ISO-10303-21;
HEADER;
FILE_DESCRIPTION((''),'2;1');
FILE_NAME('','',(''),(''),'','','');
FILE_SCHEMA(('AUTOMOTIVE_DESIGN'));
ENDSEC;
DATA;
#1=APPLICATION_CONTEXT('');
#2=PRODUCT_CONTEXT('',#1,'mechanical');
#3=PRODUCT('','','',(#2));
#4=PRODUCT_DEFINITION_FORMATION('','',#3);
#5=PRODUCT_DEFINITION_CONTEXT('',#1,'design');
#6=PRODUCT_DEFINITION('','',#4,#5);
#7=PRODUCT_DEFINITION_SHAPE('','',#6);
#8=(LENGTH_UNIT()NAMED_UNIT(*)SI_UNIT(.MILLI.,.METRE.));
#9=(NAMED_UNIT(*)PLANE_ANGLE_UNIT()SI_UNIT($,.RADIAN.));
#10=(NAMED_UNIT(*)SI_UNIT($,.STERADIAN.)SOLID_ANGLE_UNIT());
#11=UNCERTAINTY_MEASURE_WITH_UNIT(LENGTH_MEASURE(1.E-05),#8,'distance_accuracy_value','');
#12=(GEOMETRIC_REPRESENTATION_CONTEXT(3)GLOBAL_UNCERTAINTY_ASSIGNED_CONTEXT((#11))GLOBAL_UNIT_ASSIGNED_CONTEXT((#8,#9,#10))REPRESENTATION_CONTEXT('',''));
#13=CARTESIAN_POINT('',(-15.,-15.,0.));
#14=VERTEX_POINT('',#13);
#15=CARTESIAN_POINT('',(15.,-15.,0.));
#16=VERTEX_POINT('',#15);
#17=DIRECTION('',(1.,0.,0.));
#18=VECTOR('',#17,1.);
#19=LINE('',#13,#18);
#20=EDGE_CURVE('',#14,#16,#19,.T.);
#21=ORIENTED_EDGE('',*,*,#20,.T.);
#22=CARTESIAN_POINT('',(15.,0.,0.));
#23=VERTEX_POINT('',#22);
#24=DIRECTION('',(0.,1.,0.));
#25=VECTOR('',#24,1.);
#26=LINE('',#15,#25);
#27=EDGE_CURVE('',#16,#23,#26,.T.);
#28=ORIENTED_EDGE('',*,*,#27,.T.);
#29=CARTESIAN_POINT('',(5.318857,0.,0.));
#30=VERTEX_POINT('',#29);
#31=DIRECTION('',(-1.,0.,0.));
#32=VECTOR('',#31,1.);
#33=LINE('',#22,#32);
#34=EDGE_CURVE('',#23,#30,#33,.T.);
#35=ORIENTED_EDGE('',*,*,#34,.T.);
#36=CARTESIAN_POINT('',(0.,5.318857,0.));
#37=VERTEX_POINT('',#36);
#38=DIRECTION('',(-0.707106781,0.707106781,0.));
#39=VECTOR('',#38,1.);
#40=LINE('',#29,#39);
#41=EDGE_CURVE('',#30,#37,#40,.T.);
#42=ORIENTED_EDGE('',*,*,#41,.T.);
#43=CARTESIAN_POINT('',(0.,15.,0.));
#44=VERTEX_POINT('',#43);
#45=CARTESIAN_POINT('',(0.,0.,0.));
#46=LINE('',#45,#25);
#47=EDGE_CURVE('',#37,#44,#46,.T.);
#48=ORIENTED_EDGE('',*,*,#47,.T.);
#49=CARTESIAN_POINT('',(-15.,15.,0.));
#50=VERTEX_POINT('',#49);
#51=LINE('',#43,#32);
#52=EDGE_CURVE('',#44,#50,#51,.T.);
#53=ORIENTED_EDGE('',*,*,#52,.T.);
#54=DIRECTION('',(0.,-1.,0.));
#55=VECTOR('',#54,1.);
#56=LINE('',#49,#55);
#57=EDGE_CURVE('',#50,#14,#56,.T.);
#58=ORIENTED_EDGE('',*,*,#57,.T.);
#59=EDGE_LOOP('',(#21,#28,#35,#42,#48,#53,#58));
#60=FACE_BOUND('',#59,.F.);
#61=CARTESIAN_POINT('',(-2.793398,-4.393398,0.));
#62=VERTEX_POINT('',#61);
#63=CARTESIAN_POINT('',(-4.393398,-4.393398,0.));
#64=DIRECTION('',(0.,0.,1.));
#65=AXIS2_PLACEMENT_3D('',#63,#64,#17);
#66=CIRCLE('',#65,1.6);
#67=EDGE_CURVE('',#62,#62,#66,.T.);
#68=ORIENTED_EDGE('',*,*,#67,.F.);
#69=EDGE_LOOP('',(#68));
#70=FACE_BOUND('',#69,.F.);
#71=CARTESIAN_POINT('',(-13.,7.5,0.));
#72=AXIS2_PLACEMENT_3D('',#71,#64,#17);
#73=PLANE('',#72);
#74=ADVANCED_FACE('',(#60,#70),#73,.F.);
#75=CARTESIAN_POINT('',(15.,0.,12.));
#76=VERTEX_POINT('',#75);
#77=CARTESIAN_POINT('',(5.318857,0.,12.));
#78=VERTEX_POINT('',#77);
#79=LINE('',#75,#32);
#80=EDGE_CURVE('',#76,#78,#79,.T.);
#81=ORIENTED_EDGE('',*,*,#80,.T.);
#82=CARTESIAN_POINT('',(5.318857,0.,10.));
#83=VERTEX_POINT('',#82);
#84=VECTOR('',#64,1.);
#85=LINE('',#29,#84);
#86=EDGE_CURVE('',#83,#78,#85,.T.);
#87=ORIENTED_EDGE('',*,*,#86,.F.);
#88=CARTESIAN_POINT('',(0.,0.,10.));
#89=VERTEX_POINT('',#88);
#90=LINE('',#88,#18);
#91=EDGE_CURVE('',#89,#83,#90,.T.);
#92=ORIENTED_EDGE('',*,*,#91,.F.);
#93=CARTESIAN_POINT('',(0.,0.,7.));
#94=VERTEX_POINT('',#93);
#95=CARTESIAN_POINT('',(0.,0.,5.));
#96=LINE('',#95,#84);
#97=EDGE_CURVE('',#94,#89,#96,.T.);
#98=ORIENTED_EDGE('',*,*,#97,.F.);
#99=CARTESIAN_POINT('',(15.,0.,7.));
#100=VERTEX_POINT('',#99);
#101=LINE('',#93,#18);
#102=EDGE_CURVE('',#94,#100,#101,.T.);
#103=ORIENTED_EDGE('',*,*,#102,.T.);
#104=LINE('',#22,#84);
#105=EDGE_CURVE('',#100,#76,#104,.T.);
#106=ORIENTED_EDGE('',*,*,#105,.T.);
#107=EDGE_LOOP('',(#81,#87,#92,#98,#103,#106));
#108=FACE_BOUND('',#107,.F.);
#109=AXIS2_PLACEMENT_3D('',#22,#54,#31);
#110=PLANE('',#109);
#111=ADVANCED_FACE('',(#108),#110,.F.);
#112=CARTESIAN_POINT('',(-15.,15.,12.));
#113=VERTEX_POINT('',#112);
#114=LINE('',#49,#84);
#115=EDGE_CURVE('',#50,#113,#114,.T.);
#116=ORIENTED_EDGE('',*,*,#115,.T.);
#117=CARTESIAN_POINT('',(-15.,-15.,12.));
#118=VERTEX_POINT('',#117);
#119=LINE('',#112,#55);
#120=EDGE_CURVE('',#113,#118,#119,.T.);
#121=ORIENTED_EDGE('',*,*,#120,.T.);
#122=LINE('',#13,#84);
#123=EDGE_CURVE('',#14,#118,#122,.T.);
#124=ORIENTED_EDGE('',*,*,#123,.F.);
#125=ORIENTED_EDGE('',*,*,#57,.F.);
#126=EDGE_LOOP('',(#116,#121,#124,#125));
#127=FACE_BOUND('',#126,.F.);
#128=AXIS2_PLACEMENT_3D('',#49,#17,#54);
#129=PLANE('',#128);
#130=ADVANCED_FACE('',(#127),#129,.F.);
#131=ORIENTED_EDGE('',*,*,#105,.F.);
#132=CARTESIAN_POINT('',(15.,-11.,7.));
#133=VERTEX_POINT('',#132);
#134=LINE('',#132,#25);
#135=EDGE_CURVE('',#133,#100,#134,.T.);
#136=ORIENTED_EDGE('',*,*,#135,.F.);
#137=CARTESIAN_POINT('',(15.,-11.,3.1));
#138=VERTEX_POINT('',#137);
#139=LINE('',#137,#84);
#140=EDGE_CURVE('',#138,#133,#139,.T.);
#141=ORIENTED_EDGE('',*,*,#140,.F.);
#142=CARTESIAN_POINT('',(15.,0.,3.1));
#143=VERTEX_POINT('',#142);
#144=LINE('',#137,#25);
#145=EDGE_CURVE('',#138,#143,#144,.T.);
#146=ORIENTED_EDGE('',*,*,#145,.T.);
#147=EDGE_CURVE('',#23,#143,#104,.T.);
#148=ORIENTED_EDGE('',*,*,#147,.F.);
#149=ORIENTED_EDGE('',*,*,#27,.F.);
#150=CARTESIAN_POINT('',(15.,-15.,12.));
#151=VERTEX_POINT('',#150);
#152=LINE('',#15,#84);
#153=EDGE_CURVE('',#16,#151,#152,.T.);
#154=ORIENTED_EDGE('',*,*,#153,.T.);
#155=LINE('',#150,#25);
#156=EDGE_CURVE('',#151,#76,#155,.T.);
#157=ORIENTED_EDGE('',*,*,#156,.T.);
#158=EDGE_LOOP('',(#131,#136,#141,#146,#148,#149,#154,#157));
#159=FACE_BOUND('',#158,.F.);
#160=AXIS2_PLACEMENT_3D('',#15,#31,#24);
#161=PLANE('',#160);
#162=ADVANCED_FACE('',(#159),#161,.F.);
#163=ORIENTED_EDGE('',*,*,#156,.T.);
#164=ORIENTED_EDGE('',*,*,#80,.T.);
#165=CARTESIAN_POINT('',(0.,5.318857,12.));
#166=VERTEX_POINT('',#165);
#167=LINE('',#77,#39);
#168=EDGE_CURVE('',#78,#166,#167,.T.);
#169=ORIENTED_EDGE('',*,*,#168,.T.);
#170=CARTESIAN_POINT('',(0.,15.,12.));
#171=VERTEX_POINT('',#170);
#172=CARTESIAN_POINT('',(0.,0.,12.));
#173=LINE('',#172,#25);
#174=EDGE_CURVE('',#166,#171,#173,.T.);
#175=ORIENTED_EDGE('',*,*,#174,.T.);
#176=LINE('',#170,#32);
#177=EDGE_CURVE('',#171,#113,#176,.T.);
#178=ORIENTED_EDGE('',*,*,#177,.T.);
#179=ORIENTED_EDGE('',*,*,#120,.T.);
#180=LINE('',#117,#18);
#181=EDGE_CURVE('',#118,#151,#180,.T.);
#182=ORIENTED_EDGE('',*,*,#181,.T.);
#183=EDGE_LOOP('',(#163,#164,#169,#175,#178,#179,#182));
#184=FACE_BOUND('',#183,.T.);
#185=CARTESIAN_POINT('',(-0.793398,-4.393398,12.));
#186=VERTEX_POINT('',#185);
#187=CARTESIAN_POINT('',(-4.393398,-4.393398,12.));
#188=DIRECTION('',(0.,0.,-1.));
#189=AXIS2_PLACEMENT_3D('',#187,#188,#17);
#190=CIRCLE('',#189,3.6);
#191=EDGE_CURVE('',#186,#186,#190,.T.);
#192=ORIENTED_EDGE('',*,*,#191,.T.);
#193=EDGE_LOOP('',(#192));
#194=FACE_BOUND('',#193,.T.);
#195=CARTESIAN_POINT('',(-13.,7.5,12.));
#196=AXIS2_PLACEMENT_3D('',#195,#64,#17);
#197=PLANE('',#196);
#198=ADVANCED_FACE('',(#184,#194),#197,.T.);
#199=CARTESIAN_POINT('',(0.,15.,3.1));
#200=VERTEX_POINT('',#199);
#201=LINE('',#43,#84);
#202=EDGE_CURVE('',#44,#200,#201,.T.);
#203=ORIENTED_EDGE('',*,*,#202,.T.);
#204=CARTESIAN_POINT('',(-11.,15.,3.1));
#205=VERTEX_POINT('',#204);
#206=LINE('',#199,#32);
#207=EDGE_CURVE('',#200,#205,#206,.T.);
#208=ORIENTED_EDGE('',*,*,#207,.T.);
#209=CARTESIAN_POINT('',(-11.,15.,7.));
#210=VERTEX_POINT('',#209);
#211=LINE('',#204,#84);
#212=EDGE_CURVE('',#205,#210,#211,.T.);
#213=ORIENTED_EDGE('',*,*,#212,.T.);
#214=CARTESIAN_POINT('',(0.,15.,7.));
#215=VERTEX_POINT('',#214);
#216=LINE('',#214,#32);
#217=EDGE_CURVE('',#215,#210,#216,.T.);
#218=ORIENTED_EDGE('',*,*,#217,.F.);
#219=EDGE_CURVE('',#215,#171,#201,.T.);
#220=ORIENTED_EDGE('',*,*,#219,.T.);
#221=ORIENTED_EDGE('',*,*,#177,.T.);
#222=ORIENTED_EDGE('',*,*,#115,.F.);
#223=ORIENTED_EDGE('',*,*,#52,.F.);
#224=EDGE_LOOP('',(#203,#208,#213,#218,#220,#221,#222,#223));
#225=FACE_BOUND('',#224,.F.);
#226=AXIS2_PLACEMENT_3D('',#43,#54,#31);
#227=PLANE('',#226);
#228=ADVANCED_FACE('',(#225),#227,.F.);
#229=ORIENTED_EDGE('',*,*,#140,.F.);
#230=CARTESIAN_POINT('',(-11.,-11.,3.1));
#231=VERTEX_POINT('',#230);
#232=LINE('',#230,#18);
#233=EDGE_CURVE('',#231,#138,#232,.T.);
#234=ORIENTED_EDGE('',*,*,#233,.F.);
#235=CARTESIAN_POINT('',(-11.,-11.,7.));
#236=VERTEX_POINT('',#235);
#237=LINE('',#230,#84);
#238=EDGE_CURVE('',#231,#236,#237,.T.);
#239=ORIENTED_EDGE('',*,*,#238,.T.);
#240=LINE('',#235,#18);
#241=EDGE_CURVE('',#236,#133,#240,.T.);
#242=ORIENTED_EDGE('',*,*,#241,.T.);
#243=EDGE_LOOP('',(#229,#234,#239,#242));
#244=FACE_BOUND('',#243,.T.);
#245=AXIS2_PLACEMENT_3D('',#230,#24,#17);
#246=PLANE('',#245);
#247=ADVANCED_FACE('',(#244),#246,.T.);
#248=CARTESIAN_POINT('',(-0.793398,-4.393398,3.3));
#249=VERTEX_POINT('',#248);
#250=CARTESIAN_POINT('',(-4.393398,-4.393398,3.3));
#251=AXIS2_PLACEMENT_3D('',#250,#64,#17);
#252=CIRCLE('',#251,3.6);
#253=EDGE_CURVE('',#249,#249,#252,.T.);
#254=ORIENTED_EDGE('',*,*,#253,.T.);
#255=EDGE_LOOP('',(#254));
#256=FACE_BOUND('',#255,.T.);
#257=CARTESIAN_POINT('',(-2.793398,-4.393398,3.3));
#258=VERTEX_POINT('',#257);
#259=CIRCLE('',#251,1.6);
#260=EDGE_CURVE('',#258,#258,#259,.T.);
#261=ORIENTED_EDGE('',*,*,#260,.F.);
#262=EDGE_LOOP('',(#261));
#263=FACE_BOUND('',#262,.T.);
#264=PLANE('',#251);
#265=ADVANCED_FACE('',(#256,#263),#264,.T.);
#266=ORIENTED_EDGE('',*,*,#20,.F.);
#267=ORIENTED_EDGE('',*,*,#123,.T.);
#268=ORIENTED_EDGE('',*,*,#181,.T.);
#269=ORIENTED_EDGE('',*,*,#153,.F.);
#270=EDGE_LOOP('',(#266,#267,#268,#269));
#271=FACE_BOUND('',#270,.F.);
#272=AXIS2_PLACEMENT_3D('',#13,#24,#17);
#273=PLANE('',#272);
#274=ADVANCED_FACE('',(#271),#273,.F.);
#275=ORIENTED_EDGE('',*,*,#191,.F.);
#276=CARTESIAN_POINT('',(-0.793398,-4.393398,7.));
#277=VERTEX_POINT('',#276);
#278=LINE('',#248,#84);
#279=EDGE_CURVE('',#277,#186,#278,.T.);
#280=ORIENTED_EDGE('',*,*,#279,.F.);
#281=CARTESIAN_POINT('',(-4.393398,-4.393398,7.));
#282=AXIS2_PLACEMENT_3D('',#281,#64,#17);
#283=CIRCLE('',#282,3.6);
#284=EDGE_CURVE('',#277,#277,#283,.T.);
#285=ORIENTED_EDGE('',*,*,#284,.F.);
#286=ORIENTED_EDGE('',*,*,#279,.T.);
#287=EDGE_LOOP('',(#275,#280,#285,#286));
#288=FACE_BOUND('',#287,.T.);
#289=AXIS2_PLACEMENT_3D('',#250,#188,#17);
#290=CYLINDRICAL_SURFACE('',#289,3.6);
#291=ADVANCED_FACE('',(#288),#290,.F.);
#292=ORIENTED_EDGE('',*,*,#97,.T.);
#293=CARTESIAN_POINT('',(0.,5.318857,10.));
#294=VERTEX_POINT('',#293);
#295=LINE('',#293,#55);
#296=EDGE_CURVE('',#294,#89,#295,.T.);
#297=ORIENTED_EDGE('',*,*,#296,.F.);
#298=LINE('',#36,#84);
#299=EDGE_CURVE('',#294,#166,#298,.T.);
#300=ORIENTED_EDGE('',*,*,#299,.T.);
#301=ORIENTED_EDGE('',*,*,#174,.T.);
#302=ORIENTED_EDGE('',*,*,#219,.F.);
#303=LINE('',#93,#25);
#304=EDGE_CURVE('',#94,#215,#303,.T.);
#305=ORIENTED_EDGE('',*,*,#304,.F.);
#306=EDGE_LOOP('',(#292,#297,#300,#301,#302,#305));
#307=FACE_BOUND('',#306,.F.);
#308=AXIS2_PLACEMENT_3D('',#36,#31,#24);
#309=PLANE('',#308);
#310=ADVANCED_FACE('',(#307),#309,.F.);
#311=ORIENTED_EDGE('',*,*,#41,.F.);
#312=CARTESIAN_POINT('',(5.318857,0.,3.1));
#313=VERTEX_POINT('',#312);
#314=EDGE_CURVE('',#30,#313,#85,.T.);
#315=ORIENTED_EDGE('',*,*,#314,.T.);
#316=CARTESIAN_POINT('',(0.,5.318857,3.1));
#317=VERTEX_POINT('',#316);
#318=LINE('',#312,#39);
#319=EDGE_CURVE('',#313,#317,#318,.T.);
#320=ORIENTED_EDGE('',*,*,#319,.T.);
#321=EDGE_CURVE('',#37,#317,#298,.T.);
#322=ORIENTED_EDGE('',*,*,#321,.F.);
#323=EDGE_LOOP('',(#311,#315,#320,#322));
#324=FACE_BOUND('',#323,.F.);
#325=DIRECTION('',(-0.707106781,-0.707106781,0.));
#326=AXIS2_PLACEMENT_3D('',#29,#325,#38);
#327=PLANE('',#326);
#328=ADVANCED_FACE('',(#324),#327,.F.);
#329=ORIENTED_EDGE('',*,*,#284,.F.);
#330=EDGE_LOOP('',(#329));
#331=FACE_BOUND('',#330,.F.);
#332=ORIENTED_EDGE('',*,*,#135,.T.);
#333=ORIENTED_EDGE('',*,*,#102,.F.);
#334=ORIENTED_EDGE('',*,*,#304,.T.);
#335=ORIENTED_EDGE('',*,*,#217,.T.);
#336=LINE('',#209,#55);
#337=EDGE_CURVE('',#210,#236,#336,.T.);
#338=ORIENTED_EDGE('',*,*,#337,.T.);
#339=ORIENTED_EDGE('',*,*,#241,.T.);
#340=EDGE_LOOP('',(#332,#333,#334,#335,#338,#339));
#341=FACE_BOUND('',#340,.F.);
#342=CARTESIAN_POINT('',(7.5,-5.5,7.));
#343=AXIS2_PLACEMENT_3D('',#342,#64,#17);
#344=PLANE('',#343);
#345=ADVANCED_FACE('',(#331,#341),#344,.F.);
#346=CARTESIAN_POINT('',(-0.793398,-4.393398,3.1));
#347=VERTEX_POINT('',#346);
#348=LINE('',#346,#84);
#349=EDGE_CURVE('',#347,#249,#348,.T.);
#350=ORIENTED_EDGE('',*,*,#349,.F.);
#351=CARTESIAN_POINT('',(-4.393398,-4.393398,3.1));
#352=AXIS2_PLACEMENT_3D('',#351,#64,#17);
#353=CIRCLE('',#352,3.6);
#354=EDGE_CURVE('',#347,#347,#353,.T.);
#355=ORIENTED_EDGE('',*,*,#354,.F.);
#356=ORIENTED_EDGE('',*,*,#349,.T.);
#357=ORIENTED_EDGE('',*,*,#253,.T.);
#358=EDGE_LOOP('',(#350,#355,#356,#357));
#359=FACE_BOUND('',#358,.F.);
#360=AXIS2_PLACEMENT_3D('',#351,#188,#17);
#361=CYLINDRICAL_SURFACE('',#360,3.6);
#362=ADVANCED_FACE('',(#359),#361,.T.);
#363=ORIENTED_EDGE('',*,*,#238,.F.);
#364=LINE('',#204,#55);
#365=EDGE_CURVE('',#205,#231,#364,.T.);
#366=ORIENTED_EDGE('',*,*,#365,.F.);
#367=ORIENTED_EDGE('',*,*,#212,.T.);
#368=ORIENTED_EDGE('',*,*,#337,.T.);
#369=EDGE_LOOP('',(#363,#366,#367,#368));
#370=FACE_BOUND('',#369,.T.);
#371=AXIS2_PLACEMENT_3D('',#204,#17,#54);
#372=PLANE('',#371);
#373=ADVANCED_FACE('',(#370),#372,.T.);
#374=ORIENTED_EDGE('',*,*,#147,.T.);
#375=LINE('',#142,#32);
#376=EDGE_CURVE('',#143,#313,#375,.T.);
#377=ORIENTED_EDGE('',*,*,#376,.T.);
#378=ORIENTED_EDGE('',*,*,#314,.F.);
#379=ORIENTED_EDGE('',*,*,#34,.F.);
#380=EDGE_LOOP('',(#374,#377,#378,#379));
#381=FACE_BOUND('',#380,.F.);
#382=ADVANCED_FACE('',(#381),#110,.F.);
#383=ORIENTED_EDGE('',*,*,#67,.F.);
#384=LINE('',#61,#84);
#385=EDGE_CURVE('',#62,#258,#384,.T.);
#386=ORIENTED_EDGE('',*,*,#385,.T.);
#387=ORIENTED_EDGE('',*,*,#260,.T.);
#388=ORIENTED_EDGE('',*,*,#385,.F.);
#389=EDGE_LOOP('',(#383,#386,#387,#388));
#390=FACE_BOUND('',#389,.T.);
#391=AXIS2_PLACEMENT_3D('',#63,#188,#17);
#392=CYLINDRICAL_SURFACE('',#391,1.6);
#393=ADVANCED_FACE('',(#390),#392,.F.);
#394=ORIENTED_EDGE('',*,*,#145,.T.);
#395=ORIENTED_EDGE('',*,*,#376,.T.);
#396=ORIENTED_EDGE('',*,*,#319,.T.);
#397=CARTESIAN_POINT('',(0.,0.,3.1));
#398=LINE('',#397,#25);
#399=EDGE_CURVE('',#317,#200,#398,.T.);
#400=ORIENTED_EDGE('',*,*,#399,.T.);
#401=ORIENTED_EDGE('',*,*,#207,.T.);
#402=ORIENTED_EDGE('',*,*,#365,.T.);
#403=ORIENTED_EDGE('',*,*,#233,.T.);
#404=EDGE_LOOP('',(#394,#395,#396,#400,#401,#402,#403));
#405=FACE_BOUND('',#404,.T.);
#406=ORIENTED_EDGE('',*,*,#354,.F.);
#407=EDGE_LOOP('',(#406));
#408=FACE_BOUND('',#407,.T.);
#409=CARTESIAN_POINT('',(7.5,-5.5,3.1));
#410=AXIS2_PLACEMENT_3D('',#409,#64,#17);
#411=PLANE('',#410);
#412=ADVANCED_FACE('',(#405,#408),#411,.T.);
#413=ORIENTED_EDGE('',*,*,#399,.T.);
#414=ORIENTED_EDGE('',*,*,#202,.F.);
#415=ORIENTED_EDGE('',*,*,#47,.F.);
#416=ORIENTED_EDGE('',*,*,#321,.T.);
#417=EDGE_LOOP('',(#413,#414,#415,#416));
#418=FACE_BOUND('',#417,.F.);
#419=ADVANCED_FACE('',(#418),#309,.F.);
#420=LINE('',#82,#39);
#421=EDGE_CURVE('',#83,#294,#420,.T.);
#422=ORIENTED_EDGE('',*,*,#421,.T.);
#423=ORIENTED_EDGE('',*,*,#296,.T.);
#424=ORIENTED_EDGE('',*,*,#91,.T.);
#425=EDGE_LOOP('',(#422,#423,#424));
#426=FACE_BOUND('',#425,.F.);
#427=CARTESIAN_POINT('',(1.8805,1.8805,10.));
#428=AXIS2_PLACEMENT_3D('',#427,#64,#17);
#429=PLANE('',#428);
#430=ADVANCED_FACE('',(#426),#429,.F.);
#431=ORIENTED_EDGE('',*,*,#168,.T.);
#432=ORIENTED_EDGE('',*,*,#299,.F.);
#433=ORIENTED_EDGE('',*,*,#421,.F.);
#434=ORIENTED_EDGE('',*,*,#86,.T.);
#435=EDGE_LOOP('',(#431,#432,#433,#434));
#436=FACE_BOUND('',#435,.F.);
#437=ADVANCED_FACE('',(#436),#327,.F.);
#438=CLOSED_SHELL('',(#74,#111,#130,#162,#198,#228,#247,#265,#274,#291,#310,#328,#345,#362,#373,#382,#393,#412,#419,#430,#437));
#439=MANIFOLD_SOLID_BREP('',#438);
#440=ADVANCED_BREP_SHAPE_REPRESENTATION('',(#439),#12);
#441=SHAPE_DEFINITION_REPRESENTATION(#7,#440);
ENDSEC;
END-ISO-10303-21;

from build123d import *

# Parameters (mm, degrees)
F0_W     = 4
F0_H     = 15
F0_W_2   = 11
F0_H_2   = 11
F0_R     = 3.6
F0_H_3   = 4
F0_R_2   = 1.6
F1_DEPTH = 12
F2_START = 3.1
F2_DEPTH = 3.9
F3_START = 5
F3_DEPTH = 5
F4_START = 3.3
F4_DEPTH = 19.2


# Not quite as in the source:
# - a feature names something its author has since deleted; it is built from what else it names


with BuildPart() as f1:
    # F0 (on Top) → F1 (new body)
    with BuildSketch(Plane.XY):
        with Locations((-13, 7.5)):
            Rectangle(F0_W, F0_H)
        Polygon((-11, 0), (0, 0), (0, 5.31885653), (0, 15), (-7, 15), (-11, 15), align=None)
        Polygon((0, -11), (15, -11), (15, -7), (15, 0), (5.31885653, 0), (0, 0), align=None)
        Polygon((2.9605122421, -15), (15, -15), (15, -11), (0, -11), (0, -15), align=None)
        with Locations((-5.5, -5.5)):
            Rectangle(F0_W_2, F0_H_2)
        with Locations((-4.3933982822, -4.3933982822)):
            Circle(F0_R, mode=Mode.SUBTRACT)
        Polygon((0, 5.31885653), (0, 0), (5.31885653, 0), align=None)
        with Locations((-13, -13)):
            Rectangle(F0_W, F0_H_3)
        Polygon((-15, -11), (-11, -11), (-11, 0), (-15, 0), (-15, -7), align=None)
        with Locations((-5.5, -13)):
            Rectangle(F0_W_2, F0_H_3)
        with Locations((-4.3933982822, -4.3933982822)):
            Circle(F0_R)
        with Locations((-4.3933982822, -4.3933982822)):
            Circle(F0_R_2, mode=Mode.SUBTRACT)
    extrude(amount=F1_DEPTH)

    # F0 (on Top) → F2 (cut)
    with BuildSketch(Plane.XY.offset(F2_START)):
        Polygon((0, -11), (15, -11), (15, -7), (15, 0), (5.31885653, 0), (0, 0), align=None)
        with Locations((-5.5, -5.5)):
            Rectangle(F0_W_2, F0_H_2)
        with Locations((-4.3933982822, -4.3933982822)):
            Circle(F0_R, mode=Mode.SUBTRACT)
        Polygon((-11, 0), (0, 0), (0, 5.31885653), (0, 15), (-7, 15), (-11, 15), align=None)
        Polygon((0, 5.31885653), (0, 0), (5.31885653, 0), align=None)
    extrude(amount=F2_DEPTH, mode=Mode.SUBTRACT)

    # F0 (on Top) → F3 (cut)
    with BuildSketch(Plane.XY.offset(F3_START)):
        Polygon((0, 5.31885653), (0, 0), (5.31885653, 0), align=None)
    extrude(amount=F3_DEPTH, mode=Mode.SUBTRACT)

    # F0 (on Top) → F4 (cut)
    with BuildSketch(Plane.XY.offset(F4_START)):
        with Locations((-4.3933982822, -4.3933982822)):
            Circle(F0_R)
        with Locations((-4.3933982822, -4.3933982822)):
            Circle(F0_R_2, mode=Mode.SUBTRACT)
    extrude(amount=F4_DEPTH, mode=Mode.SUBTRACT)


solid = f1.part
